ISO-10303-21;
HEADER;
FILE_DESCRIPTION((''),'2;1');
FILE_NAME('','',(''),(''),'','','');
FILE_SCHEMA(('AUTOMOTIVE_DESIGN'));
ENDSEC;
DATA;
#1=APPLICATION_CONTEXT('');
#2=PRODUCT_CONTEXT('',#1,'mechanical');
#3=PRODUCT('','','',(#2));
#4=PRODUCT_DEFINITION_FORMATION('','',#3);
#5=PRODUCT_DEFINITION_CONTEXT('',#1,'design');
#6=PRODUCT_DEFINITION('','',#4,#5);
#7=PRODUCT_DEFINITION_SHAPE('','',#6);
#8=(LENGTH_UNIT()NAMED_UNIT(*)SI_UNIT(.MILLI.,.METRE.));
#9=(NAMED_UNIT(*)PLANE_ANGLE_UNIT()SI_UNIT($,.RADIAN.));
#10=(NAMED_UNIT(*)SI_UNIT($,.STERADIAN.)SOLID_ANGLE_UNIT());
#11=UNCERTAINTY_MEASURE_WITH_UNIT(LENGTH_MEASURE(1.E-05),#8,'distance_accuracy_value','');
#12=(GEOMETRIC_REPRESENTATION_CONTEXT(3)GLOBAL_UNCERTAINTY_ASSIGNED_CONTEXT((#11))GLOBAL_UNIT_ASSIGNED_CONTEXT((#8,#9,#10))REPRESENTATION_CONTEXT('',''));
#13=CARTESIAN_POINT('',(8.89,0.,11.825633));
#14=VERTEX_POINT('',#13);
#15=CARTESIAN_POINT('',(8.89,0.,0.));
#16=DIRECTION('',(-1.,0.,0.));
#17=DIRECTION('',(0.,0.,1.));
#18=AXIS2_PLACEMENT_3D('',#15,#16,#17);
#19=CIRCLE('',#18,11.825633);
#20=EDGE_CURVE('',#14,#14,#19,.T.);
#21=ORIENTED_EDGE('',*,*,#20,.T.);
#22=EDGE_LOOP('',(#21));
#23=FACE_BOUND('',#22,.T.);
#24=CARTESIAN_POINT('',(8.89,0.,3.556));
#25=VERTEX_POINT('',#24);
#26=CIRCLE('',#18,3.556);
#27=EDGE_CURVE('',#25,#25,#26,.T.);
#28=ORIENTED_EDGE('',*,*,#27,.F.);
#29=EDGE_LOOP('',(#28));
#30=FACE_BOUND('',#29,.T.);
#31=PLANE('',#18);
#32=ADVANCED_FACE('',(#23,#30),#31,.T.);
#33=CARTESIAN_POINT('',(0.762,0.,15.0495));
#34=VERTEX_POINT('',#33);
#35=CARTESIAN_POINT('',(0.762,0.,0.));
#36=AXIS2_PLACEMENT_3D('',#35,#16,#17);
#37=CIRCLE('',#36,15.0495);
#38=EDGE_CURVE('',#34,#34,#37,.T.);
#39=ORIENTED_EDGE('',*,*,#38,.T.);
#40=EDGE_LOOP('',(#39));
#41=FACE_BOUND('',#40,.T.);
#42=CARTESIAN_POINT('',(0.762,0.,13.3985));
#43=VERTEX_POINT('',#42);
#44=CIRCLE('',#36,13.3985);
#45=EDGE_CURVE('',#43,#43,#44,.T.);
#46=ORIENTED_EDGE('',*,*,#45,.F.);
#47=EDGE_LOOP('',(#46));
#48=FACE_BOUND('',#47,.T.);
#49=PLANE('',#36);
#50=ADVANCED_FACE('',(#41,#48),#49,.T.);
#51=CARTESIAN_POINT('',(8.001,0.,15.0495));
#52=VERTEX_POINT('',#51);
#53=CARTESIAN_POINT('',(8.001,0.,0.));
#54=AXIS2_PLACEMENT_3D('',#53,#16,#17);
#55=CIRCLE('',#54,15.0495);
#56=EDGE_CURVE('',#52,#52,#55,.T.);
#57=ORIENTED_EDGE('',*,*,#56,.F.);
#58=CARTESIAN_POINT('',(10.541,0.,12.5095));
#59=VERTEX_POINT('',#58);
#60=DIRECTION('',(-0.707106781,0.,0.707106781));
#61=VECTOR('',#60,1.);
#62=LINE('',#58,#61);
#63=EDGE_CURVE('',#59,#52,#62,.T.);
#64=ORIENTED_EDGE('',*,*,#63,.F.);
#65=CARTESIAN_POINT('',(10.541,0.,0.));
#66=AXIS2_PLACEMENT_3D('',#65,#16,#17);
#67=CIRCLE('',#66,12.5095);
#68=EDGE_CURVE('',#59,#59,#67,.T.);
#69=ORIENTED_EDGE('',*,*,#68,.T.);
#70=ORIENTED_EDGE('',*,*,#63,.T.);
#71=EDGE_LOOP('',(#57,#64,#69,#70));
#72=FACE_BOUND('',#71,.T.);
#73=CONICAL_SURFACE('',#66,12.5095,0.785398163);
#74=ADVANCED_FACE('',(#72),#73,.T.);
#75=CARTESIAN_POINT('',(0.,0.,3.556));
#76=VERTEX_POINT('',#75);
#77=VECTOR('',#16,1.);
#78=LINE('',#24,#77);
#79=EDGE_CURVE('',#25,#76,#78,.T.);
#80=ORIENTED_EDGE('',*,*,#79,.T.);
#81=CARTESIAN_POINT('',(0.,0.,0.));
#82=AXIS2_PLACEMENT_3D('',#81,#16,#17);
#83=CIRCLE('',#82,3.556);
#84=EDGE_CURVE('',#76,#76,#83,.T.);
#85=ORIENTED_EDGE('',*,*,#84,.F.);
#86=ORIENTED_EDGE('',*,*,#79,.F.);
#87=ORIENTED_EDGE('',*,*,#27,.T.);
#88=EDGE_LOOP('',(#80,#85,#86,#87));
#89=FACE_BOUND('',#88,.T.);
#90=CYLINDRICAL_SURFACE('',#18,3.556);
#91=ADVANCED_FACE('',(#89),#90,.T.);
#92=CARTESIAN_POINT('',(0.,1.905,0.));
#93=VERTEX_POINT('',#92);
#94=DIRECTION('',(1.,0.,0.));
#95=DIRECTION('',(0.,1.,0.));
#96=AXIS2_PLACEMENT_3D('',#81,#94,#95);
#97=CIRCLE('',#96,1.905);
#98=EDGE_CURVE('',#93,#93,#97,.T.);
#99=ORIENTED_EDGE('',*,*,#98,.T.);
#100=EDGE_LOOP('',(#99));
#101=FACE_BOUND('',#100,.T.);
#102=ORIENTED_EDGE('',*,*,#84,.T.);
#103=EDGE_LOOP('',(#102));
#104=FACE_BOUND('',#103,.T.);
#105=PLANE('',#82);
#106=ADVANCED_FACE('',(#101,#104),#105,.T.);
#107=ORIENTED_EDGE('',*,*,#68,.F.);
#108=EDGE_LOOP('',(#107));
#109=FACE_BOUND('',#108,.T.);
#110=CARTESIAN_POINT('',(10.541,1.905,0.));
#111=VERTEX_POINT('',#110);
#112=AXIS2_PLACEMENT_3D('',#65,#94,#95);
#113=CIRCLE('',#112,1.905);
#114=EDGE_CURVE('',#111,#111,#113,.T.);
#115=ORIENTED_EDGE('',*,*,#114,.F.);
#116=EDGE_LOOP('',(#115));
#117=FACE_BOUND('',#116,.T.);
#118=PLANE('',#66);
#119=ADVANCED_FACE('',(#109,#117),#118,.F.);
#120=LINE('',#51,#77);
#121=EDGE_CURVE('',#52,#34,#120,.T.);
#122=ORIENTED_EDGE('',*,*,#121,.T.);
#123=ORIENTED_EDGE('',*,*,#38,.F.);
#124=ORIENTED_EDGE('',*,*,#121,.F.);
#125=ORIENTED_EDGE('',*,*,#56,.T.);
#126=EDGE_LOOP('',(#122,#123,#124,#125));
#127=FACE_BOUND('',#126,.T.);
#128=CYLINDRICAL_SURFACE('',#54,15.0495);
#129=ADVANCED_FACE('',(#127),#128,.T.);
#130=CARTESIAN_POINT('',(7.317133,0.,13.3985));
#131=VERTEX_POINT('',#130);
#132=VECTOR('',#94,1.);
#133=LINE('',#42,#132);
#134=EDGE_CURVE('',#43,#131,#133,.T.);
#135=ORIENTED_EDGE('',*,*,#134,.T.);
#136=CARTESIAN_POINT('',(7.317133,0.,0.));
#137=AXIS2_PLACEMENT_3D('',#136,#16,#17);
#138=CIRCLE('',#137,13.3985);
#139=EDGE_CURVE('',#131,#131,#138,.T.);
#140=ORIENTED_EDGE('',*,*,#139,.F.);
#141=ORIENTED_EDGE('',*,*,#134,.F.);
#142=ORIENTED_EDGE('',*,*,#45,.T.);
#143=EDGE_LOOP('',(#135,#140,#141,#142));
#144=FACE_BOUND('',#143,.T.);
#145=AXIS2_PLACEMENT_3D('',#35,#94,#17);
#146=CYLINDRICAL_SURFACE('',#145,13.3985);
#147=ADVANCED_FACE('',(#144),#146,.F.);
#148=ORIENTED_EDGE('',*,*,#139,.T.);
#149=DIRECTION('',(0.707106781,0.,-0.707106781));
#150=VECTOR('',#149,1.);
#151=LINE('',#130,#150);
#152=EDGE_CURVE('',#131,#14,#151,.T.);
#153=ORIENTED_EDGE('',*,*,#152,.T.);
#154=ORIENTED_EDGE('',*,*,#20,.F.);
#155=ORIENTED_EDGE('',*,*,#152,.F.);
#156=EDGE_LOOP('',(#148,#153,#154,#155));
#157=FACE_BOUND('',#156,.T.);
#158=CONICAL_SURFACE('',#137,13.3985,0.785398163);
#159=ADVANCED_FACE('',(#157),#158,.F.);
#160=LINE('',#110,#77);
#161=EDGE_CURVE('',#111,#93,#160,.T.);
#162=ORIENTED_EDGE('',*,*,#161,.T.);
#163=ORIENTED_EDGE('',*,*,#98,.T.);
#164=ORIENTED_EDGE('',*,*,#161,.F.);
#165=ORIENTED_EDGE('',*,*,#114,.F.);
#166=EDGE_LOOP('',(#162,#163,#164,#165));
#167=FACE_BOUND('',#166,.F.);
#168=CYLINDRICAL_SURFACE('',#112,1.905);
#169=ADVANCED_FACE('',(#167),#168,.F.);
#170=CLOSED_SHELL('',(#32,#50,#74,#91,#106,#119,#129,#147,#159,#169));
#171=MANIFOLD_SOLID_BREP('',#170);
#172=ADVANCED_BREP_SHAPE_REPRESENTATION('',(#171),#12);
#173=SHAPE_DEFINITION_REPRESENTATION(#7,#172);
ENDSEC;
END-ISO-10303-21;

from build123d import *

# Parameters (mm, degrees)
F2_R     = 1.905
F3_DEPTH = 10.542


# Not quite as in the source:
# - a feature names something its author has since deleted; it is built from what else it names


with BuildPart() as f1:
    # F0 (on Front) → F1 (revolve)
    with BuildSketch(Plane.XZ):
        Polygon((8.001, 15.0495), (0.762, 15.0495), (0.762, 13.3985), (7.3171334085, 13.3985), (8.89, 11.8256334085), (8.89, 3.556), (0, 3.556), (0, 0), (10.541, 0), (10.541, 12.5095), align=None)
    revolve(axis=Axis((5.2705, 0, 0), (-1, 0, 0)))

    # F2 (on face) → F3 (cut, through all)
    with BuildSketch(Plane.YZ.offset(10.541)):
        Circle(F2_R)
    extrude(amount=-F3_DEPTH, mode=Mode.SUBTRACT)


solid = f1.part
